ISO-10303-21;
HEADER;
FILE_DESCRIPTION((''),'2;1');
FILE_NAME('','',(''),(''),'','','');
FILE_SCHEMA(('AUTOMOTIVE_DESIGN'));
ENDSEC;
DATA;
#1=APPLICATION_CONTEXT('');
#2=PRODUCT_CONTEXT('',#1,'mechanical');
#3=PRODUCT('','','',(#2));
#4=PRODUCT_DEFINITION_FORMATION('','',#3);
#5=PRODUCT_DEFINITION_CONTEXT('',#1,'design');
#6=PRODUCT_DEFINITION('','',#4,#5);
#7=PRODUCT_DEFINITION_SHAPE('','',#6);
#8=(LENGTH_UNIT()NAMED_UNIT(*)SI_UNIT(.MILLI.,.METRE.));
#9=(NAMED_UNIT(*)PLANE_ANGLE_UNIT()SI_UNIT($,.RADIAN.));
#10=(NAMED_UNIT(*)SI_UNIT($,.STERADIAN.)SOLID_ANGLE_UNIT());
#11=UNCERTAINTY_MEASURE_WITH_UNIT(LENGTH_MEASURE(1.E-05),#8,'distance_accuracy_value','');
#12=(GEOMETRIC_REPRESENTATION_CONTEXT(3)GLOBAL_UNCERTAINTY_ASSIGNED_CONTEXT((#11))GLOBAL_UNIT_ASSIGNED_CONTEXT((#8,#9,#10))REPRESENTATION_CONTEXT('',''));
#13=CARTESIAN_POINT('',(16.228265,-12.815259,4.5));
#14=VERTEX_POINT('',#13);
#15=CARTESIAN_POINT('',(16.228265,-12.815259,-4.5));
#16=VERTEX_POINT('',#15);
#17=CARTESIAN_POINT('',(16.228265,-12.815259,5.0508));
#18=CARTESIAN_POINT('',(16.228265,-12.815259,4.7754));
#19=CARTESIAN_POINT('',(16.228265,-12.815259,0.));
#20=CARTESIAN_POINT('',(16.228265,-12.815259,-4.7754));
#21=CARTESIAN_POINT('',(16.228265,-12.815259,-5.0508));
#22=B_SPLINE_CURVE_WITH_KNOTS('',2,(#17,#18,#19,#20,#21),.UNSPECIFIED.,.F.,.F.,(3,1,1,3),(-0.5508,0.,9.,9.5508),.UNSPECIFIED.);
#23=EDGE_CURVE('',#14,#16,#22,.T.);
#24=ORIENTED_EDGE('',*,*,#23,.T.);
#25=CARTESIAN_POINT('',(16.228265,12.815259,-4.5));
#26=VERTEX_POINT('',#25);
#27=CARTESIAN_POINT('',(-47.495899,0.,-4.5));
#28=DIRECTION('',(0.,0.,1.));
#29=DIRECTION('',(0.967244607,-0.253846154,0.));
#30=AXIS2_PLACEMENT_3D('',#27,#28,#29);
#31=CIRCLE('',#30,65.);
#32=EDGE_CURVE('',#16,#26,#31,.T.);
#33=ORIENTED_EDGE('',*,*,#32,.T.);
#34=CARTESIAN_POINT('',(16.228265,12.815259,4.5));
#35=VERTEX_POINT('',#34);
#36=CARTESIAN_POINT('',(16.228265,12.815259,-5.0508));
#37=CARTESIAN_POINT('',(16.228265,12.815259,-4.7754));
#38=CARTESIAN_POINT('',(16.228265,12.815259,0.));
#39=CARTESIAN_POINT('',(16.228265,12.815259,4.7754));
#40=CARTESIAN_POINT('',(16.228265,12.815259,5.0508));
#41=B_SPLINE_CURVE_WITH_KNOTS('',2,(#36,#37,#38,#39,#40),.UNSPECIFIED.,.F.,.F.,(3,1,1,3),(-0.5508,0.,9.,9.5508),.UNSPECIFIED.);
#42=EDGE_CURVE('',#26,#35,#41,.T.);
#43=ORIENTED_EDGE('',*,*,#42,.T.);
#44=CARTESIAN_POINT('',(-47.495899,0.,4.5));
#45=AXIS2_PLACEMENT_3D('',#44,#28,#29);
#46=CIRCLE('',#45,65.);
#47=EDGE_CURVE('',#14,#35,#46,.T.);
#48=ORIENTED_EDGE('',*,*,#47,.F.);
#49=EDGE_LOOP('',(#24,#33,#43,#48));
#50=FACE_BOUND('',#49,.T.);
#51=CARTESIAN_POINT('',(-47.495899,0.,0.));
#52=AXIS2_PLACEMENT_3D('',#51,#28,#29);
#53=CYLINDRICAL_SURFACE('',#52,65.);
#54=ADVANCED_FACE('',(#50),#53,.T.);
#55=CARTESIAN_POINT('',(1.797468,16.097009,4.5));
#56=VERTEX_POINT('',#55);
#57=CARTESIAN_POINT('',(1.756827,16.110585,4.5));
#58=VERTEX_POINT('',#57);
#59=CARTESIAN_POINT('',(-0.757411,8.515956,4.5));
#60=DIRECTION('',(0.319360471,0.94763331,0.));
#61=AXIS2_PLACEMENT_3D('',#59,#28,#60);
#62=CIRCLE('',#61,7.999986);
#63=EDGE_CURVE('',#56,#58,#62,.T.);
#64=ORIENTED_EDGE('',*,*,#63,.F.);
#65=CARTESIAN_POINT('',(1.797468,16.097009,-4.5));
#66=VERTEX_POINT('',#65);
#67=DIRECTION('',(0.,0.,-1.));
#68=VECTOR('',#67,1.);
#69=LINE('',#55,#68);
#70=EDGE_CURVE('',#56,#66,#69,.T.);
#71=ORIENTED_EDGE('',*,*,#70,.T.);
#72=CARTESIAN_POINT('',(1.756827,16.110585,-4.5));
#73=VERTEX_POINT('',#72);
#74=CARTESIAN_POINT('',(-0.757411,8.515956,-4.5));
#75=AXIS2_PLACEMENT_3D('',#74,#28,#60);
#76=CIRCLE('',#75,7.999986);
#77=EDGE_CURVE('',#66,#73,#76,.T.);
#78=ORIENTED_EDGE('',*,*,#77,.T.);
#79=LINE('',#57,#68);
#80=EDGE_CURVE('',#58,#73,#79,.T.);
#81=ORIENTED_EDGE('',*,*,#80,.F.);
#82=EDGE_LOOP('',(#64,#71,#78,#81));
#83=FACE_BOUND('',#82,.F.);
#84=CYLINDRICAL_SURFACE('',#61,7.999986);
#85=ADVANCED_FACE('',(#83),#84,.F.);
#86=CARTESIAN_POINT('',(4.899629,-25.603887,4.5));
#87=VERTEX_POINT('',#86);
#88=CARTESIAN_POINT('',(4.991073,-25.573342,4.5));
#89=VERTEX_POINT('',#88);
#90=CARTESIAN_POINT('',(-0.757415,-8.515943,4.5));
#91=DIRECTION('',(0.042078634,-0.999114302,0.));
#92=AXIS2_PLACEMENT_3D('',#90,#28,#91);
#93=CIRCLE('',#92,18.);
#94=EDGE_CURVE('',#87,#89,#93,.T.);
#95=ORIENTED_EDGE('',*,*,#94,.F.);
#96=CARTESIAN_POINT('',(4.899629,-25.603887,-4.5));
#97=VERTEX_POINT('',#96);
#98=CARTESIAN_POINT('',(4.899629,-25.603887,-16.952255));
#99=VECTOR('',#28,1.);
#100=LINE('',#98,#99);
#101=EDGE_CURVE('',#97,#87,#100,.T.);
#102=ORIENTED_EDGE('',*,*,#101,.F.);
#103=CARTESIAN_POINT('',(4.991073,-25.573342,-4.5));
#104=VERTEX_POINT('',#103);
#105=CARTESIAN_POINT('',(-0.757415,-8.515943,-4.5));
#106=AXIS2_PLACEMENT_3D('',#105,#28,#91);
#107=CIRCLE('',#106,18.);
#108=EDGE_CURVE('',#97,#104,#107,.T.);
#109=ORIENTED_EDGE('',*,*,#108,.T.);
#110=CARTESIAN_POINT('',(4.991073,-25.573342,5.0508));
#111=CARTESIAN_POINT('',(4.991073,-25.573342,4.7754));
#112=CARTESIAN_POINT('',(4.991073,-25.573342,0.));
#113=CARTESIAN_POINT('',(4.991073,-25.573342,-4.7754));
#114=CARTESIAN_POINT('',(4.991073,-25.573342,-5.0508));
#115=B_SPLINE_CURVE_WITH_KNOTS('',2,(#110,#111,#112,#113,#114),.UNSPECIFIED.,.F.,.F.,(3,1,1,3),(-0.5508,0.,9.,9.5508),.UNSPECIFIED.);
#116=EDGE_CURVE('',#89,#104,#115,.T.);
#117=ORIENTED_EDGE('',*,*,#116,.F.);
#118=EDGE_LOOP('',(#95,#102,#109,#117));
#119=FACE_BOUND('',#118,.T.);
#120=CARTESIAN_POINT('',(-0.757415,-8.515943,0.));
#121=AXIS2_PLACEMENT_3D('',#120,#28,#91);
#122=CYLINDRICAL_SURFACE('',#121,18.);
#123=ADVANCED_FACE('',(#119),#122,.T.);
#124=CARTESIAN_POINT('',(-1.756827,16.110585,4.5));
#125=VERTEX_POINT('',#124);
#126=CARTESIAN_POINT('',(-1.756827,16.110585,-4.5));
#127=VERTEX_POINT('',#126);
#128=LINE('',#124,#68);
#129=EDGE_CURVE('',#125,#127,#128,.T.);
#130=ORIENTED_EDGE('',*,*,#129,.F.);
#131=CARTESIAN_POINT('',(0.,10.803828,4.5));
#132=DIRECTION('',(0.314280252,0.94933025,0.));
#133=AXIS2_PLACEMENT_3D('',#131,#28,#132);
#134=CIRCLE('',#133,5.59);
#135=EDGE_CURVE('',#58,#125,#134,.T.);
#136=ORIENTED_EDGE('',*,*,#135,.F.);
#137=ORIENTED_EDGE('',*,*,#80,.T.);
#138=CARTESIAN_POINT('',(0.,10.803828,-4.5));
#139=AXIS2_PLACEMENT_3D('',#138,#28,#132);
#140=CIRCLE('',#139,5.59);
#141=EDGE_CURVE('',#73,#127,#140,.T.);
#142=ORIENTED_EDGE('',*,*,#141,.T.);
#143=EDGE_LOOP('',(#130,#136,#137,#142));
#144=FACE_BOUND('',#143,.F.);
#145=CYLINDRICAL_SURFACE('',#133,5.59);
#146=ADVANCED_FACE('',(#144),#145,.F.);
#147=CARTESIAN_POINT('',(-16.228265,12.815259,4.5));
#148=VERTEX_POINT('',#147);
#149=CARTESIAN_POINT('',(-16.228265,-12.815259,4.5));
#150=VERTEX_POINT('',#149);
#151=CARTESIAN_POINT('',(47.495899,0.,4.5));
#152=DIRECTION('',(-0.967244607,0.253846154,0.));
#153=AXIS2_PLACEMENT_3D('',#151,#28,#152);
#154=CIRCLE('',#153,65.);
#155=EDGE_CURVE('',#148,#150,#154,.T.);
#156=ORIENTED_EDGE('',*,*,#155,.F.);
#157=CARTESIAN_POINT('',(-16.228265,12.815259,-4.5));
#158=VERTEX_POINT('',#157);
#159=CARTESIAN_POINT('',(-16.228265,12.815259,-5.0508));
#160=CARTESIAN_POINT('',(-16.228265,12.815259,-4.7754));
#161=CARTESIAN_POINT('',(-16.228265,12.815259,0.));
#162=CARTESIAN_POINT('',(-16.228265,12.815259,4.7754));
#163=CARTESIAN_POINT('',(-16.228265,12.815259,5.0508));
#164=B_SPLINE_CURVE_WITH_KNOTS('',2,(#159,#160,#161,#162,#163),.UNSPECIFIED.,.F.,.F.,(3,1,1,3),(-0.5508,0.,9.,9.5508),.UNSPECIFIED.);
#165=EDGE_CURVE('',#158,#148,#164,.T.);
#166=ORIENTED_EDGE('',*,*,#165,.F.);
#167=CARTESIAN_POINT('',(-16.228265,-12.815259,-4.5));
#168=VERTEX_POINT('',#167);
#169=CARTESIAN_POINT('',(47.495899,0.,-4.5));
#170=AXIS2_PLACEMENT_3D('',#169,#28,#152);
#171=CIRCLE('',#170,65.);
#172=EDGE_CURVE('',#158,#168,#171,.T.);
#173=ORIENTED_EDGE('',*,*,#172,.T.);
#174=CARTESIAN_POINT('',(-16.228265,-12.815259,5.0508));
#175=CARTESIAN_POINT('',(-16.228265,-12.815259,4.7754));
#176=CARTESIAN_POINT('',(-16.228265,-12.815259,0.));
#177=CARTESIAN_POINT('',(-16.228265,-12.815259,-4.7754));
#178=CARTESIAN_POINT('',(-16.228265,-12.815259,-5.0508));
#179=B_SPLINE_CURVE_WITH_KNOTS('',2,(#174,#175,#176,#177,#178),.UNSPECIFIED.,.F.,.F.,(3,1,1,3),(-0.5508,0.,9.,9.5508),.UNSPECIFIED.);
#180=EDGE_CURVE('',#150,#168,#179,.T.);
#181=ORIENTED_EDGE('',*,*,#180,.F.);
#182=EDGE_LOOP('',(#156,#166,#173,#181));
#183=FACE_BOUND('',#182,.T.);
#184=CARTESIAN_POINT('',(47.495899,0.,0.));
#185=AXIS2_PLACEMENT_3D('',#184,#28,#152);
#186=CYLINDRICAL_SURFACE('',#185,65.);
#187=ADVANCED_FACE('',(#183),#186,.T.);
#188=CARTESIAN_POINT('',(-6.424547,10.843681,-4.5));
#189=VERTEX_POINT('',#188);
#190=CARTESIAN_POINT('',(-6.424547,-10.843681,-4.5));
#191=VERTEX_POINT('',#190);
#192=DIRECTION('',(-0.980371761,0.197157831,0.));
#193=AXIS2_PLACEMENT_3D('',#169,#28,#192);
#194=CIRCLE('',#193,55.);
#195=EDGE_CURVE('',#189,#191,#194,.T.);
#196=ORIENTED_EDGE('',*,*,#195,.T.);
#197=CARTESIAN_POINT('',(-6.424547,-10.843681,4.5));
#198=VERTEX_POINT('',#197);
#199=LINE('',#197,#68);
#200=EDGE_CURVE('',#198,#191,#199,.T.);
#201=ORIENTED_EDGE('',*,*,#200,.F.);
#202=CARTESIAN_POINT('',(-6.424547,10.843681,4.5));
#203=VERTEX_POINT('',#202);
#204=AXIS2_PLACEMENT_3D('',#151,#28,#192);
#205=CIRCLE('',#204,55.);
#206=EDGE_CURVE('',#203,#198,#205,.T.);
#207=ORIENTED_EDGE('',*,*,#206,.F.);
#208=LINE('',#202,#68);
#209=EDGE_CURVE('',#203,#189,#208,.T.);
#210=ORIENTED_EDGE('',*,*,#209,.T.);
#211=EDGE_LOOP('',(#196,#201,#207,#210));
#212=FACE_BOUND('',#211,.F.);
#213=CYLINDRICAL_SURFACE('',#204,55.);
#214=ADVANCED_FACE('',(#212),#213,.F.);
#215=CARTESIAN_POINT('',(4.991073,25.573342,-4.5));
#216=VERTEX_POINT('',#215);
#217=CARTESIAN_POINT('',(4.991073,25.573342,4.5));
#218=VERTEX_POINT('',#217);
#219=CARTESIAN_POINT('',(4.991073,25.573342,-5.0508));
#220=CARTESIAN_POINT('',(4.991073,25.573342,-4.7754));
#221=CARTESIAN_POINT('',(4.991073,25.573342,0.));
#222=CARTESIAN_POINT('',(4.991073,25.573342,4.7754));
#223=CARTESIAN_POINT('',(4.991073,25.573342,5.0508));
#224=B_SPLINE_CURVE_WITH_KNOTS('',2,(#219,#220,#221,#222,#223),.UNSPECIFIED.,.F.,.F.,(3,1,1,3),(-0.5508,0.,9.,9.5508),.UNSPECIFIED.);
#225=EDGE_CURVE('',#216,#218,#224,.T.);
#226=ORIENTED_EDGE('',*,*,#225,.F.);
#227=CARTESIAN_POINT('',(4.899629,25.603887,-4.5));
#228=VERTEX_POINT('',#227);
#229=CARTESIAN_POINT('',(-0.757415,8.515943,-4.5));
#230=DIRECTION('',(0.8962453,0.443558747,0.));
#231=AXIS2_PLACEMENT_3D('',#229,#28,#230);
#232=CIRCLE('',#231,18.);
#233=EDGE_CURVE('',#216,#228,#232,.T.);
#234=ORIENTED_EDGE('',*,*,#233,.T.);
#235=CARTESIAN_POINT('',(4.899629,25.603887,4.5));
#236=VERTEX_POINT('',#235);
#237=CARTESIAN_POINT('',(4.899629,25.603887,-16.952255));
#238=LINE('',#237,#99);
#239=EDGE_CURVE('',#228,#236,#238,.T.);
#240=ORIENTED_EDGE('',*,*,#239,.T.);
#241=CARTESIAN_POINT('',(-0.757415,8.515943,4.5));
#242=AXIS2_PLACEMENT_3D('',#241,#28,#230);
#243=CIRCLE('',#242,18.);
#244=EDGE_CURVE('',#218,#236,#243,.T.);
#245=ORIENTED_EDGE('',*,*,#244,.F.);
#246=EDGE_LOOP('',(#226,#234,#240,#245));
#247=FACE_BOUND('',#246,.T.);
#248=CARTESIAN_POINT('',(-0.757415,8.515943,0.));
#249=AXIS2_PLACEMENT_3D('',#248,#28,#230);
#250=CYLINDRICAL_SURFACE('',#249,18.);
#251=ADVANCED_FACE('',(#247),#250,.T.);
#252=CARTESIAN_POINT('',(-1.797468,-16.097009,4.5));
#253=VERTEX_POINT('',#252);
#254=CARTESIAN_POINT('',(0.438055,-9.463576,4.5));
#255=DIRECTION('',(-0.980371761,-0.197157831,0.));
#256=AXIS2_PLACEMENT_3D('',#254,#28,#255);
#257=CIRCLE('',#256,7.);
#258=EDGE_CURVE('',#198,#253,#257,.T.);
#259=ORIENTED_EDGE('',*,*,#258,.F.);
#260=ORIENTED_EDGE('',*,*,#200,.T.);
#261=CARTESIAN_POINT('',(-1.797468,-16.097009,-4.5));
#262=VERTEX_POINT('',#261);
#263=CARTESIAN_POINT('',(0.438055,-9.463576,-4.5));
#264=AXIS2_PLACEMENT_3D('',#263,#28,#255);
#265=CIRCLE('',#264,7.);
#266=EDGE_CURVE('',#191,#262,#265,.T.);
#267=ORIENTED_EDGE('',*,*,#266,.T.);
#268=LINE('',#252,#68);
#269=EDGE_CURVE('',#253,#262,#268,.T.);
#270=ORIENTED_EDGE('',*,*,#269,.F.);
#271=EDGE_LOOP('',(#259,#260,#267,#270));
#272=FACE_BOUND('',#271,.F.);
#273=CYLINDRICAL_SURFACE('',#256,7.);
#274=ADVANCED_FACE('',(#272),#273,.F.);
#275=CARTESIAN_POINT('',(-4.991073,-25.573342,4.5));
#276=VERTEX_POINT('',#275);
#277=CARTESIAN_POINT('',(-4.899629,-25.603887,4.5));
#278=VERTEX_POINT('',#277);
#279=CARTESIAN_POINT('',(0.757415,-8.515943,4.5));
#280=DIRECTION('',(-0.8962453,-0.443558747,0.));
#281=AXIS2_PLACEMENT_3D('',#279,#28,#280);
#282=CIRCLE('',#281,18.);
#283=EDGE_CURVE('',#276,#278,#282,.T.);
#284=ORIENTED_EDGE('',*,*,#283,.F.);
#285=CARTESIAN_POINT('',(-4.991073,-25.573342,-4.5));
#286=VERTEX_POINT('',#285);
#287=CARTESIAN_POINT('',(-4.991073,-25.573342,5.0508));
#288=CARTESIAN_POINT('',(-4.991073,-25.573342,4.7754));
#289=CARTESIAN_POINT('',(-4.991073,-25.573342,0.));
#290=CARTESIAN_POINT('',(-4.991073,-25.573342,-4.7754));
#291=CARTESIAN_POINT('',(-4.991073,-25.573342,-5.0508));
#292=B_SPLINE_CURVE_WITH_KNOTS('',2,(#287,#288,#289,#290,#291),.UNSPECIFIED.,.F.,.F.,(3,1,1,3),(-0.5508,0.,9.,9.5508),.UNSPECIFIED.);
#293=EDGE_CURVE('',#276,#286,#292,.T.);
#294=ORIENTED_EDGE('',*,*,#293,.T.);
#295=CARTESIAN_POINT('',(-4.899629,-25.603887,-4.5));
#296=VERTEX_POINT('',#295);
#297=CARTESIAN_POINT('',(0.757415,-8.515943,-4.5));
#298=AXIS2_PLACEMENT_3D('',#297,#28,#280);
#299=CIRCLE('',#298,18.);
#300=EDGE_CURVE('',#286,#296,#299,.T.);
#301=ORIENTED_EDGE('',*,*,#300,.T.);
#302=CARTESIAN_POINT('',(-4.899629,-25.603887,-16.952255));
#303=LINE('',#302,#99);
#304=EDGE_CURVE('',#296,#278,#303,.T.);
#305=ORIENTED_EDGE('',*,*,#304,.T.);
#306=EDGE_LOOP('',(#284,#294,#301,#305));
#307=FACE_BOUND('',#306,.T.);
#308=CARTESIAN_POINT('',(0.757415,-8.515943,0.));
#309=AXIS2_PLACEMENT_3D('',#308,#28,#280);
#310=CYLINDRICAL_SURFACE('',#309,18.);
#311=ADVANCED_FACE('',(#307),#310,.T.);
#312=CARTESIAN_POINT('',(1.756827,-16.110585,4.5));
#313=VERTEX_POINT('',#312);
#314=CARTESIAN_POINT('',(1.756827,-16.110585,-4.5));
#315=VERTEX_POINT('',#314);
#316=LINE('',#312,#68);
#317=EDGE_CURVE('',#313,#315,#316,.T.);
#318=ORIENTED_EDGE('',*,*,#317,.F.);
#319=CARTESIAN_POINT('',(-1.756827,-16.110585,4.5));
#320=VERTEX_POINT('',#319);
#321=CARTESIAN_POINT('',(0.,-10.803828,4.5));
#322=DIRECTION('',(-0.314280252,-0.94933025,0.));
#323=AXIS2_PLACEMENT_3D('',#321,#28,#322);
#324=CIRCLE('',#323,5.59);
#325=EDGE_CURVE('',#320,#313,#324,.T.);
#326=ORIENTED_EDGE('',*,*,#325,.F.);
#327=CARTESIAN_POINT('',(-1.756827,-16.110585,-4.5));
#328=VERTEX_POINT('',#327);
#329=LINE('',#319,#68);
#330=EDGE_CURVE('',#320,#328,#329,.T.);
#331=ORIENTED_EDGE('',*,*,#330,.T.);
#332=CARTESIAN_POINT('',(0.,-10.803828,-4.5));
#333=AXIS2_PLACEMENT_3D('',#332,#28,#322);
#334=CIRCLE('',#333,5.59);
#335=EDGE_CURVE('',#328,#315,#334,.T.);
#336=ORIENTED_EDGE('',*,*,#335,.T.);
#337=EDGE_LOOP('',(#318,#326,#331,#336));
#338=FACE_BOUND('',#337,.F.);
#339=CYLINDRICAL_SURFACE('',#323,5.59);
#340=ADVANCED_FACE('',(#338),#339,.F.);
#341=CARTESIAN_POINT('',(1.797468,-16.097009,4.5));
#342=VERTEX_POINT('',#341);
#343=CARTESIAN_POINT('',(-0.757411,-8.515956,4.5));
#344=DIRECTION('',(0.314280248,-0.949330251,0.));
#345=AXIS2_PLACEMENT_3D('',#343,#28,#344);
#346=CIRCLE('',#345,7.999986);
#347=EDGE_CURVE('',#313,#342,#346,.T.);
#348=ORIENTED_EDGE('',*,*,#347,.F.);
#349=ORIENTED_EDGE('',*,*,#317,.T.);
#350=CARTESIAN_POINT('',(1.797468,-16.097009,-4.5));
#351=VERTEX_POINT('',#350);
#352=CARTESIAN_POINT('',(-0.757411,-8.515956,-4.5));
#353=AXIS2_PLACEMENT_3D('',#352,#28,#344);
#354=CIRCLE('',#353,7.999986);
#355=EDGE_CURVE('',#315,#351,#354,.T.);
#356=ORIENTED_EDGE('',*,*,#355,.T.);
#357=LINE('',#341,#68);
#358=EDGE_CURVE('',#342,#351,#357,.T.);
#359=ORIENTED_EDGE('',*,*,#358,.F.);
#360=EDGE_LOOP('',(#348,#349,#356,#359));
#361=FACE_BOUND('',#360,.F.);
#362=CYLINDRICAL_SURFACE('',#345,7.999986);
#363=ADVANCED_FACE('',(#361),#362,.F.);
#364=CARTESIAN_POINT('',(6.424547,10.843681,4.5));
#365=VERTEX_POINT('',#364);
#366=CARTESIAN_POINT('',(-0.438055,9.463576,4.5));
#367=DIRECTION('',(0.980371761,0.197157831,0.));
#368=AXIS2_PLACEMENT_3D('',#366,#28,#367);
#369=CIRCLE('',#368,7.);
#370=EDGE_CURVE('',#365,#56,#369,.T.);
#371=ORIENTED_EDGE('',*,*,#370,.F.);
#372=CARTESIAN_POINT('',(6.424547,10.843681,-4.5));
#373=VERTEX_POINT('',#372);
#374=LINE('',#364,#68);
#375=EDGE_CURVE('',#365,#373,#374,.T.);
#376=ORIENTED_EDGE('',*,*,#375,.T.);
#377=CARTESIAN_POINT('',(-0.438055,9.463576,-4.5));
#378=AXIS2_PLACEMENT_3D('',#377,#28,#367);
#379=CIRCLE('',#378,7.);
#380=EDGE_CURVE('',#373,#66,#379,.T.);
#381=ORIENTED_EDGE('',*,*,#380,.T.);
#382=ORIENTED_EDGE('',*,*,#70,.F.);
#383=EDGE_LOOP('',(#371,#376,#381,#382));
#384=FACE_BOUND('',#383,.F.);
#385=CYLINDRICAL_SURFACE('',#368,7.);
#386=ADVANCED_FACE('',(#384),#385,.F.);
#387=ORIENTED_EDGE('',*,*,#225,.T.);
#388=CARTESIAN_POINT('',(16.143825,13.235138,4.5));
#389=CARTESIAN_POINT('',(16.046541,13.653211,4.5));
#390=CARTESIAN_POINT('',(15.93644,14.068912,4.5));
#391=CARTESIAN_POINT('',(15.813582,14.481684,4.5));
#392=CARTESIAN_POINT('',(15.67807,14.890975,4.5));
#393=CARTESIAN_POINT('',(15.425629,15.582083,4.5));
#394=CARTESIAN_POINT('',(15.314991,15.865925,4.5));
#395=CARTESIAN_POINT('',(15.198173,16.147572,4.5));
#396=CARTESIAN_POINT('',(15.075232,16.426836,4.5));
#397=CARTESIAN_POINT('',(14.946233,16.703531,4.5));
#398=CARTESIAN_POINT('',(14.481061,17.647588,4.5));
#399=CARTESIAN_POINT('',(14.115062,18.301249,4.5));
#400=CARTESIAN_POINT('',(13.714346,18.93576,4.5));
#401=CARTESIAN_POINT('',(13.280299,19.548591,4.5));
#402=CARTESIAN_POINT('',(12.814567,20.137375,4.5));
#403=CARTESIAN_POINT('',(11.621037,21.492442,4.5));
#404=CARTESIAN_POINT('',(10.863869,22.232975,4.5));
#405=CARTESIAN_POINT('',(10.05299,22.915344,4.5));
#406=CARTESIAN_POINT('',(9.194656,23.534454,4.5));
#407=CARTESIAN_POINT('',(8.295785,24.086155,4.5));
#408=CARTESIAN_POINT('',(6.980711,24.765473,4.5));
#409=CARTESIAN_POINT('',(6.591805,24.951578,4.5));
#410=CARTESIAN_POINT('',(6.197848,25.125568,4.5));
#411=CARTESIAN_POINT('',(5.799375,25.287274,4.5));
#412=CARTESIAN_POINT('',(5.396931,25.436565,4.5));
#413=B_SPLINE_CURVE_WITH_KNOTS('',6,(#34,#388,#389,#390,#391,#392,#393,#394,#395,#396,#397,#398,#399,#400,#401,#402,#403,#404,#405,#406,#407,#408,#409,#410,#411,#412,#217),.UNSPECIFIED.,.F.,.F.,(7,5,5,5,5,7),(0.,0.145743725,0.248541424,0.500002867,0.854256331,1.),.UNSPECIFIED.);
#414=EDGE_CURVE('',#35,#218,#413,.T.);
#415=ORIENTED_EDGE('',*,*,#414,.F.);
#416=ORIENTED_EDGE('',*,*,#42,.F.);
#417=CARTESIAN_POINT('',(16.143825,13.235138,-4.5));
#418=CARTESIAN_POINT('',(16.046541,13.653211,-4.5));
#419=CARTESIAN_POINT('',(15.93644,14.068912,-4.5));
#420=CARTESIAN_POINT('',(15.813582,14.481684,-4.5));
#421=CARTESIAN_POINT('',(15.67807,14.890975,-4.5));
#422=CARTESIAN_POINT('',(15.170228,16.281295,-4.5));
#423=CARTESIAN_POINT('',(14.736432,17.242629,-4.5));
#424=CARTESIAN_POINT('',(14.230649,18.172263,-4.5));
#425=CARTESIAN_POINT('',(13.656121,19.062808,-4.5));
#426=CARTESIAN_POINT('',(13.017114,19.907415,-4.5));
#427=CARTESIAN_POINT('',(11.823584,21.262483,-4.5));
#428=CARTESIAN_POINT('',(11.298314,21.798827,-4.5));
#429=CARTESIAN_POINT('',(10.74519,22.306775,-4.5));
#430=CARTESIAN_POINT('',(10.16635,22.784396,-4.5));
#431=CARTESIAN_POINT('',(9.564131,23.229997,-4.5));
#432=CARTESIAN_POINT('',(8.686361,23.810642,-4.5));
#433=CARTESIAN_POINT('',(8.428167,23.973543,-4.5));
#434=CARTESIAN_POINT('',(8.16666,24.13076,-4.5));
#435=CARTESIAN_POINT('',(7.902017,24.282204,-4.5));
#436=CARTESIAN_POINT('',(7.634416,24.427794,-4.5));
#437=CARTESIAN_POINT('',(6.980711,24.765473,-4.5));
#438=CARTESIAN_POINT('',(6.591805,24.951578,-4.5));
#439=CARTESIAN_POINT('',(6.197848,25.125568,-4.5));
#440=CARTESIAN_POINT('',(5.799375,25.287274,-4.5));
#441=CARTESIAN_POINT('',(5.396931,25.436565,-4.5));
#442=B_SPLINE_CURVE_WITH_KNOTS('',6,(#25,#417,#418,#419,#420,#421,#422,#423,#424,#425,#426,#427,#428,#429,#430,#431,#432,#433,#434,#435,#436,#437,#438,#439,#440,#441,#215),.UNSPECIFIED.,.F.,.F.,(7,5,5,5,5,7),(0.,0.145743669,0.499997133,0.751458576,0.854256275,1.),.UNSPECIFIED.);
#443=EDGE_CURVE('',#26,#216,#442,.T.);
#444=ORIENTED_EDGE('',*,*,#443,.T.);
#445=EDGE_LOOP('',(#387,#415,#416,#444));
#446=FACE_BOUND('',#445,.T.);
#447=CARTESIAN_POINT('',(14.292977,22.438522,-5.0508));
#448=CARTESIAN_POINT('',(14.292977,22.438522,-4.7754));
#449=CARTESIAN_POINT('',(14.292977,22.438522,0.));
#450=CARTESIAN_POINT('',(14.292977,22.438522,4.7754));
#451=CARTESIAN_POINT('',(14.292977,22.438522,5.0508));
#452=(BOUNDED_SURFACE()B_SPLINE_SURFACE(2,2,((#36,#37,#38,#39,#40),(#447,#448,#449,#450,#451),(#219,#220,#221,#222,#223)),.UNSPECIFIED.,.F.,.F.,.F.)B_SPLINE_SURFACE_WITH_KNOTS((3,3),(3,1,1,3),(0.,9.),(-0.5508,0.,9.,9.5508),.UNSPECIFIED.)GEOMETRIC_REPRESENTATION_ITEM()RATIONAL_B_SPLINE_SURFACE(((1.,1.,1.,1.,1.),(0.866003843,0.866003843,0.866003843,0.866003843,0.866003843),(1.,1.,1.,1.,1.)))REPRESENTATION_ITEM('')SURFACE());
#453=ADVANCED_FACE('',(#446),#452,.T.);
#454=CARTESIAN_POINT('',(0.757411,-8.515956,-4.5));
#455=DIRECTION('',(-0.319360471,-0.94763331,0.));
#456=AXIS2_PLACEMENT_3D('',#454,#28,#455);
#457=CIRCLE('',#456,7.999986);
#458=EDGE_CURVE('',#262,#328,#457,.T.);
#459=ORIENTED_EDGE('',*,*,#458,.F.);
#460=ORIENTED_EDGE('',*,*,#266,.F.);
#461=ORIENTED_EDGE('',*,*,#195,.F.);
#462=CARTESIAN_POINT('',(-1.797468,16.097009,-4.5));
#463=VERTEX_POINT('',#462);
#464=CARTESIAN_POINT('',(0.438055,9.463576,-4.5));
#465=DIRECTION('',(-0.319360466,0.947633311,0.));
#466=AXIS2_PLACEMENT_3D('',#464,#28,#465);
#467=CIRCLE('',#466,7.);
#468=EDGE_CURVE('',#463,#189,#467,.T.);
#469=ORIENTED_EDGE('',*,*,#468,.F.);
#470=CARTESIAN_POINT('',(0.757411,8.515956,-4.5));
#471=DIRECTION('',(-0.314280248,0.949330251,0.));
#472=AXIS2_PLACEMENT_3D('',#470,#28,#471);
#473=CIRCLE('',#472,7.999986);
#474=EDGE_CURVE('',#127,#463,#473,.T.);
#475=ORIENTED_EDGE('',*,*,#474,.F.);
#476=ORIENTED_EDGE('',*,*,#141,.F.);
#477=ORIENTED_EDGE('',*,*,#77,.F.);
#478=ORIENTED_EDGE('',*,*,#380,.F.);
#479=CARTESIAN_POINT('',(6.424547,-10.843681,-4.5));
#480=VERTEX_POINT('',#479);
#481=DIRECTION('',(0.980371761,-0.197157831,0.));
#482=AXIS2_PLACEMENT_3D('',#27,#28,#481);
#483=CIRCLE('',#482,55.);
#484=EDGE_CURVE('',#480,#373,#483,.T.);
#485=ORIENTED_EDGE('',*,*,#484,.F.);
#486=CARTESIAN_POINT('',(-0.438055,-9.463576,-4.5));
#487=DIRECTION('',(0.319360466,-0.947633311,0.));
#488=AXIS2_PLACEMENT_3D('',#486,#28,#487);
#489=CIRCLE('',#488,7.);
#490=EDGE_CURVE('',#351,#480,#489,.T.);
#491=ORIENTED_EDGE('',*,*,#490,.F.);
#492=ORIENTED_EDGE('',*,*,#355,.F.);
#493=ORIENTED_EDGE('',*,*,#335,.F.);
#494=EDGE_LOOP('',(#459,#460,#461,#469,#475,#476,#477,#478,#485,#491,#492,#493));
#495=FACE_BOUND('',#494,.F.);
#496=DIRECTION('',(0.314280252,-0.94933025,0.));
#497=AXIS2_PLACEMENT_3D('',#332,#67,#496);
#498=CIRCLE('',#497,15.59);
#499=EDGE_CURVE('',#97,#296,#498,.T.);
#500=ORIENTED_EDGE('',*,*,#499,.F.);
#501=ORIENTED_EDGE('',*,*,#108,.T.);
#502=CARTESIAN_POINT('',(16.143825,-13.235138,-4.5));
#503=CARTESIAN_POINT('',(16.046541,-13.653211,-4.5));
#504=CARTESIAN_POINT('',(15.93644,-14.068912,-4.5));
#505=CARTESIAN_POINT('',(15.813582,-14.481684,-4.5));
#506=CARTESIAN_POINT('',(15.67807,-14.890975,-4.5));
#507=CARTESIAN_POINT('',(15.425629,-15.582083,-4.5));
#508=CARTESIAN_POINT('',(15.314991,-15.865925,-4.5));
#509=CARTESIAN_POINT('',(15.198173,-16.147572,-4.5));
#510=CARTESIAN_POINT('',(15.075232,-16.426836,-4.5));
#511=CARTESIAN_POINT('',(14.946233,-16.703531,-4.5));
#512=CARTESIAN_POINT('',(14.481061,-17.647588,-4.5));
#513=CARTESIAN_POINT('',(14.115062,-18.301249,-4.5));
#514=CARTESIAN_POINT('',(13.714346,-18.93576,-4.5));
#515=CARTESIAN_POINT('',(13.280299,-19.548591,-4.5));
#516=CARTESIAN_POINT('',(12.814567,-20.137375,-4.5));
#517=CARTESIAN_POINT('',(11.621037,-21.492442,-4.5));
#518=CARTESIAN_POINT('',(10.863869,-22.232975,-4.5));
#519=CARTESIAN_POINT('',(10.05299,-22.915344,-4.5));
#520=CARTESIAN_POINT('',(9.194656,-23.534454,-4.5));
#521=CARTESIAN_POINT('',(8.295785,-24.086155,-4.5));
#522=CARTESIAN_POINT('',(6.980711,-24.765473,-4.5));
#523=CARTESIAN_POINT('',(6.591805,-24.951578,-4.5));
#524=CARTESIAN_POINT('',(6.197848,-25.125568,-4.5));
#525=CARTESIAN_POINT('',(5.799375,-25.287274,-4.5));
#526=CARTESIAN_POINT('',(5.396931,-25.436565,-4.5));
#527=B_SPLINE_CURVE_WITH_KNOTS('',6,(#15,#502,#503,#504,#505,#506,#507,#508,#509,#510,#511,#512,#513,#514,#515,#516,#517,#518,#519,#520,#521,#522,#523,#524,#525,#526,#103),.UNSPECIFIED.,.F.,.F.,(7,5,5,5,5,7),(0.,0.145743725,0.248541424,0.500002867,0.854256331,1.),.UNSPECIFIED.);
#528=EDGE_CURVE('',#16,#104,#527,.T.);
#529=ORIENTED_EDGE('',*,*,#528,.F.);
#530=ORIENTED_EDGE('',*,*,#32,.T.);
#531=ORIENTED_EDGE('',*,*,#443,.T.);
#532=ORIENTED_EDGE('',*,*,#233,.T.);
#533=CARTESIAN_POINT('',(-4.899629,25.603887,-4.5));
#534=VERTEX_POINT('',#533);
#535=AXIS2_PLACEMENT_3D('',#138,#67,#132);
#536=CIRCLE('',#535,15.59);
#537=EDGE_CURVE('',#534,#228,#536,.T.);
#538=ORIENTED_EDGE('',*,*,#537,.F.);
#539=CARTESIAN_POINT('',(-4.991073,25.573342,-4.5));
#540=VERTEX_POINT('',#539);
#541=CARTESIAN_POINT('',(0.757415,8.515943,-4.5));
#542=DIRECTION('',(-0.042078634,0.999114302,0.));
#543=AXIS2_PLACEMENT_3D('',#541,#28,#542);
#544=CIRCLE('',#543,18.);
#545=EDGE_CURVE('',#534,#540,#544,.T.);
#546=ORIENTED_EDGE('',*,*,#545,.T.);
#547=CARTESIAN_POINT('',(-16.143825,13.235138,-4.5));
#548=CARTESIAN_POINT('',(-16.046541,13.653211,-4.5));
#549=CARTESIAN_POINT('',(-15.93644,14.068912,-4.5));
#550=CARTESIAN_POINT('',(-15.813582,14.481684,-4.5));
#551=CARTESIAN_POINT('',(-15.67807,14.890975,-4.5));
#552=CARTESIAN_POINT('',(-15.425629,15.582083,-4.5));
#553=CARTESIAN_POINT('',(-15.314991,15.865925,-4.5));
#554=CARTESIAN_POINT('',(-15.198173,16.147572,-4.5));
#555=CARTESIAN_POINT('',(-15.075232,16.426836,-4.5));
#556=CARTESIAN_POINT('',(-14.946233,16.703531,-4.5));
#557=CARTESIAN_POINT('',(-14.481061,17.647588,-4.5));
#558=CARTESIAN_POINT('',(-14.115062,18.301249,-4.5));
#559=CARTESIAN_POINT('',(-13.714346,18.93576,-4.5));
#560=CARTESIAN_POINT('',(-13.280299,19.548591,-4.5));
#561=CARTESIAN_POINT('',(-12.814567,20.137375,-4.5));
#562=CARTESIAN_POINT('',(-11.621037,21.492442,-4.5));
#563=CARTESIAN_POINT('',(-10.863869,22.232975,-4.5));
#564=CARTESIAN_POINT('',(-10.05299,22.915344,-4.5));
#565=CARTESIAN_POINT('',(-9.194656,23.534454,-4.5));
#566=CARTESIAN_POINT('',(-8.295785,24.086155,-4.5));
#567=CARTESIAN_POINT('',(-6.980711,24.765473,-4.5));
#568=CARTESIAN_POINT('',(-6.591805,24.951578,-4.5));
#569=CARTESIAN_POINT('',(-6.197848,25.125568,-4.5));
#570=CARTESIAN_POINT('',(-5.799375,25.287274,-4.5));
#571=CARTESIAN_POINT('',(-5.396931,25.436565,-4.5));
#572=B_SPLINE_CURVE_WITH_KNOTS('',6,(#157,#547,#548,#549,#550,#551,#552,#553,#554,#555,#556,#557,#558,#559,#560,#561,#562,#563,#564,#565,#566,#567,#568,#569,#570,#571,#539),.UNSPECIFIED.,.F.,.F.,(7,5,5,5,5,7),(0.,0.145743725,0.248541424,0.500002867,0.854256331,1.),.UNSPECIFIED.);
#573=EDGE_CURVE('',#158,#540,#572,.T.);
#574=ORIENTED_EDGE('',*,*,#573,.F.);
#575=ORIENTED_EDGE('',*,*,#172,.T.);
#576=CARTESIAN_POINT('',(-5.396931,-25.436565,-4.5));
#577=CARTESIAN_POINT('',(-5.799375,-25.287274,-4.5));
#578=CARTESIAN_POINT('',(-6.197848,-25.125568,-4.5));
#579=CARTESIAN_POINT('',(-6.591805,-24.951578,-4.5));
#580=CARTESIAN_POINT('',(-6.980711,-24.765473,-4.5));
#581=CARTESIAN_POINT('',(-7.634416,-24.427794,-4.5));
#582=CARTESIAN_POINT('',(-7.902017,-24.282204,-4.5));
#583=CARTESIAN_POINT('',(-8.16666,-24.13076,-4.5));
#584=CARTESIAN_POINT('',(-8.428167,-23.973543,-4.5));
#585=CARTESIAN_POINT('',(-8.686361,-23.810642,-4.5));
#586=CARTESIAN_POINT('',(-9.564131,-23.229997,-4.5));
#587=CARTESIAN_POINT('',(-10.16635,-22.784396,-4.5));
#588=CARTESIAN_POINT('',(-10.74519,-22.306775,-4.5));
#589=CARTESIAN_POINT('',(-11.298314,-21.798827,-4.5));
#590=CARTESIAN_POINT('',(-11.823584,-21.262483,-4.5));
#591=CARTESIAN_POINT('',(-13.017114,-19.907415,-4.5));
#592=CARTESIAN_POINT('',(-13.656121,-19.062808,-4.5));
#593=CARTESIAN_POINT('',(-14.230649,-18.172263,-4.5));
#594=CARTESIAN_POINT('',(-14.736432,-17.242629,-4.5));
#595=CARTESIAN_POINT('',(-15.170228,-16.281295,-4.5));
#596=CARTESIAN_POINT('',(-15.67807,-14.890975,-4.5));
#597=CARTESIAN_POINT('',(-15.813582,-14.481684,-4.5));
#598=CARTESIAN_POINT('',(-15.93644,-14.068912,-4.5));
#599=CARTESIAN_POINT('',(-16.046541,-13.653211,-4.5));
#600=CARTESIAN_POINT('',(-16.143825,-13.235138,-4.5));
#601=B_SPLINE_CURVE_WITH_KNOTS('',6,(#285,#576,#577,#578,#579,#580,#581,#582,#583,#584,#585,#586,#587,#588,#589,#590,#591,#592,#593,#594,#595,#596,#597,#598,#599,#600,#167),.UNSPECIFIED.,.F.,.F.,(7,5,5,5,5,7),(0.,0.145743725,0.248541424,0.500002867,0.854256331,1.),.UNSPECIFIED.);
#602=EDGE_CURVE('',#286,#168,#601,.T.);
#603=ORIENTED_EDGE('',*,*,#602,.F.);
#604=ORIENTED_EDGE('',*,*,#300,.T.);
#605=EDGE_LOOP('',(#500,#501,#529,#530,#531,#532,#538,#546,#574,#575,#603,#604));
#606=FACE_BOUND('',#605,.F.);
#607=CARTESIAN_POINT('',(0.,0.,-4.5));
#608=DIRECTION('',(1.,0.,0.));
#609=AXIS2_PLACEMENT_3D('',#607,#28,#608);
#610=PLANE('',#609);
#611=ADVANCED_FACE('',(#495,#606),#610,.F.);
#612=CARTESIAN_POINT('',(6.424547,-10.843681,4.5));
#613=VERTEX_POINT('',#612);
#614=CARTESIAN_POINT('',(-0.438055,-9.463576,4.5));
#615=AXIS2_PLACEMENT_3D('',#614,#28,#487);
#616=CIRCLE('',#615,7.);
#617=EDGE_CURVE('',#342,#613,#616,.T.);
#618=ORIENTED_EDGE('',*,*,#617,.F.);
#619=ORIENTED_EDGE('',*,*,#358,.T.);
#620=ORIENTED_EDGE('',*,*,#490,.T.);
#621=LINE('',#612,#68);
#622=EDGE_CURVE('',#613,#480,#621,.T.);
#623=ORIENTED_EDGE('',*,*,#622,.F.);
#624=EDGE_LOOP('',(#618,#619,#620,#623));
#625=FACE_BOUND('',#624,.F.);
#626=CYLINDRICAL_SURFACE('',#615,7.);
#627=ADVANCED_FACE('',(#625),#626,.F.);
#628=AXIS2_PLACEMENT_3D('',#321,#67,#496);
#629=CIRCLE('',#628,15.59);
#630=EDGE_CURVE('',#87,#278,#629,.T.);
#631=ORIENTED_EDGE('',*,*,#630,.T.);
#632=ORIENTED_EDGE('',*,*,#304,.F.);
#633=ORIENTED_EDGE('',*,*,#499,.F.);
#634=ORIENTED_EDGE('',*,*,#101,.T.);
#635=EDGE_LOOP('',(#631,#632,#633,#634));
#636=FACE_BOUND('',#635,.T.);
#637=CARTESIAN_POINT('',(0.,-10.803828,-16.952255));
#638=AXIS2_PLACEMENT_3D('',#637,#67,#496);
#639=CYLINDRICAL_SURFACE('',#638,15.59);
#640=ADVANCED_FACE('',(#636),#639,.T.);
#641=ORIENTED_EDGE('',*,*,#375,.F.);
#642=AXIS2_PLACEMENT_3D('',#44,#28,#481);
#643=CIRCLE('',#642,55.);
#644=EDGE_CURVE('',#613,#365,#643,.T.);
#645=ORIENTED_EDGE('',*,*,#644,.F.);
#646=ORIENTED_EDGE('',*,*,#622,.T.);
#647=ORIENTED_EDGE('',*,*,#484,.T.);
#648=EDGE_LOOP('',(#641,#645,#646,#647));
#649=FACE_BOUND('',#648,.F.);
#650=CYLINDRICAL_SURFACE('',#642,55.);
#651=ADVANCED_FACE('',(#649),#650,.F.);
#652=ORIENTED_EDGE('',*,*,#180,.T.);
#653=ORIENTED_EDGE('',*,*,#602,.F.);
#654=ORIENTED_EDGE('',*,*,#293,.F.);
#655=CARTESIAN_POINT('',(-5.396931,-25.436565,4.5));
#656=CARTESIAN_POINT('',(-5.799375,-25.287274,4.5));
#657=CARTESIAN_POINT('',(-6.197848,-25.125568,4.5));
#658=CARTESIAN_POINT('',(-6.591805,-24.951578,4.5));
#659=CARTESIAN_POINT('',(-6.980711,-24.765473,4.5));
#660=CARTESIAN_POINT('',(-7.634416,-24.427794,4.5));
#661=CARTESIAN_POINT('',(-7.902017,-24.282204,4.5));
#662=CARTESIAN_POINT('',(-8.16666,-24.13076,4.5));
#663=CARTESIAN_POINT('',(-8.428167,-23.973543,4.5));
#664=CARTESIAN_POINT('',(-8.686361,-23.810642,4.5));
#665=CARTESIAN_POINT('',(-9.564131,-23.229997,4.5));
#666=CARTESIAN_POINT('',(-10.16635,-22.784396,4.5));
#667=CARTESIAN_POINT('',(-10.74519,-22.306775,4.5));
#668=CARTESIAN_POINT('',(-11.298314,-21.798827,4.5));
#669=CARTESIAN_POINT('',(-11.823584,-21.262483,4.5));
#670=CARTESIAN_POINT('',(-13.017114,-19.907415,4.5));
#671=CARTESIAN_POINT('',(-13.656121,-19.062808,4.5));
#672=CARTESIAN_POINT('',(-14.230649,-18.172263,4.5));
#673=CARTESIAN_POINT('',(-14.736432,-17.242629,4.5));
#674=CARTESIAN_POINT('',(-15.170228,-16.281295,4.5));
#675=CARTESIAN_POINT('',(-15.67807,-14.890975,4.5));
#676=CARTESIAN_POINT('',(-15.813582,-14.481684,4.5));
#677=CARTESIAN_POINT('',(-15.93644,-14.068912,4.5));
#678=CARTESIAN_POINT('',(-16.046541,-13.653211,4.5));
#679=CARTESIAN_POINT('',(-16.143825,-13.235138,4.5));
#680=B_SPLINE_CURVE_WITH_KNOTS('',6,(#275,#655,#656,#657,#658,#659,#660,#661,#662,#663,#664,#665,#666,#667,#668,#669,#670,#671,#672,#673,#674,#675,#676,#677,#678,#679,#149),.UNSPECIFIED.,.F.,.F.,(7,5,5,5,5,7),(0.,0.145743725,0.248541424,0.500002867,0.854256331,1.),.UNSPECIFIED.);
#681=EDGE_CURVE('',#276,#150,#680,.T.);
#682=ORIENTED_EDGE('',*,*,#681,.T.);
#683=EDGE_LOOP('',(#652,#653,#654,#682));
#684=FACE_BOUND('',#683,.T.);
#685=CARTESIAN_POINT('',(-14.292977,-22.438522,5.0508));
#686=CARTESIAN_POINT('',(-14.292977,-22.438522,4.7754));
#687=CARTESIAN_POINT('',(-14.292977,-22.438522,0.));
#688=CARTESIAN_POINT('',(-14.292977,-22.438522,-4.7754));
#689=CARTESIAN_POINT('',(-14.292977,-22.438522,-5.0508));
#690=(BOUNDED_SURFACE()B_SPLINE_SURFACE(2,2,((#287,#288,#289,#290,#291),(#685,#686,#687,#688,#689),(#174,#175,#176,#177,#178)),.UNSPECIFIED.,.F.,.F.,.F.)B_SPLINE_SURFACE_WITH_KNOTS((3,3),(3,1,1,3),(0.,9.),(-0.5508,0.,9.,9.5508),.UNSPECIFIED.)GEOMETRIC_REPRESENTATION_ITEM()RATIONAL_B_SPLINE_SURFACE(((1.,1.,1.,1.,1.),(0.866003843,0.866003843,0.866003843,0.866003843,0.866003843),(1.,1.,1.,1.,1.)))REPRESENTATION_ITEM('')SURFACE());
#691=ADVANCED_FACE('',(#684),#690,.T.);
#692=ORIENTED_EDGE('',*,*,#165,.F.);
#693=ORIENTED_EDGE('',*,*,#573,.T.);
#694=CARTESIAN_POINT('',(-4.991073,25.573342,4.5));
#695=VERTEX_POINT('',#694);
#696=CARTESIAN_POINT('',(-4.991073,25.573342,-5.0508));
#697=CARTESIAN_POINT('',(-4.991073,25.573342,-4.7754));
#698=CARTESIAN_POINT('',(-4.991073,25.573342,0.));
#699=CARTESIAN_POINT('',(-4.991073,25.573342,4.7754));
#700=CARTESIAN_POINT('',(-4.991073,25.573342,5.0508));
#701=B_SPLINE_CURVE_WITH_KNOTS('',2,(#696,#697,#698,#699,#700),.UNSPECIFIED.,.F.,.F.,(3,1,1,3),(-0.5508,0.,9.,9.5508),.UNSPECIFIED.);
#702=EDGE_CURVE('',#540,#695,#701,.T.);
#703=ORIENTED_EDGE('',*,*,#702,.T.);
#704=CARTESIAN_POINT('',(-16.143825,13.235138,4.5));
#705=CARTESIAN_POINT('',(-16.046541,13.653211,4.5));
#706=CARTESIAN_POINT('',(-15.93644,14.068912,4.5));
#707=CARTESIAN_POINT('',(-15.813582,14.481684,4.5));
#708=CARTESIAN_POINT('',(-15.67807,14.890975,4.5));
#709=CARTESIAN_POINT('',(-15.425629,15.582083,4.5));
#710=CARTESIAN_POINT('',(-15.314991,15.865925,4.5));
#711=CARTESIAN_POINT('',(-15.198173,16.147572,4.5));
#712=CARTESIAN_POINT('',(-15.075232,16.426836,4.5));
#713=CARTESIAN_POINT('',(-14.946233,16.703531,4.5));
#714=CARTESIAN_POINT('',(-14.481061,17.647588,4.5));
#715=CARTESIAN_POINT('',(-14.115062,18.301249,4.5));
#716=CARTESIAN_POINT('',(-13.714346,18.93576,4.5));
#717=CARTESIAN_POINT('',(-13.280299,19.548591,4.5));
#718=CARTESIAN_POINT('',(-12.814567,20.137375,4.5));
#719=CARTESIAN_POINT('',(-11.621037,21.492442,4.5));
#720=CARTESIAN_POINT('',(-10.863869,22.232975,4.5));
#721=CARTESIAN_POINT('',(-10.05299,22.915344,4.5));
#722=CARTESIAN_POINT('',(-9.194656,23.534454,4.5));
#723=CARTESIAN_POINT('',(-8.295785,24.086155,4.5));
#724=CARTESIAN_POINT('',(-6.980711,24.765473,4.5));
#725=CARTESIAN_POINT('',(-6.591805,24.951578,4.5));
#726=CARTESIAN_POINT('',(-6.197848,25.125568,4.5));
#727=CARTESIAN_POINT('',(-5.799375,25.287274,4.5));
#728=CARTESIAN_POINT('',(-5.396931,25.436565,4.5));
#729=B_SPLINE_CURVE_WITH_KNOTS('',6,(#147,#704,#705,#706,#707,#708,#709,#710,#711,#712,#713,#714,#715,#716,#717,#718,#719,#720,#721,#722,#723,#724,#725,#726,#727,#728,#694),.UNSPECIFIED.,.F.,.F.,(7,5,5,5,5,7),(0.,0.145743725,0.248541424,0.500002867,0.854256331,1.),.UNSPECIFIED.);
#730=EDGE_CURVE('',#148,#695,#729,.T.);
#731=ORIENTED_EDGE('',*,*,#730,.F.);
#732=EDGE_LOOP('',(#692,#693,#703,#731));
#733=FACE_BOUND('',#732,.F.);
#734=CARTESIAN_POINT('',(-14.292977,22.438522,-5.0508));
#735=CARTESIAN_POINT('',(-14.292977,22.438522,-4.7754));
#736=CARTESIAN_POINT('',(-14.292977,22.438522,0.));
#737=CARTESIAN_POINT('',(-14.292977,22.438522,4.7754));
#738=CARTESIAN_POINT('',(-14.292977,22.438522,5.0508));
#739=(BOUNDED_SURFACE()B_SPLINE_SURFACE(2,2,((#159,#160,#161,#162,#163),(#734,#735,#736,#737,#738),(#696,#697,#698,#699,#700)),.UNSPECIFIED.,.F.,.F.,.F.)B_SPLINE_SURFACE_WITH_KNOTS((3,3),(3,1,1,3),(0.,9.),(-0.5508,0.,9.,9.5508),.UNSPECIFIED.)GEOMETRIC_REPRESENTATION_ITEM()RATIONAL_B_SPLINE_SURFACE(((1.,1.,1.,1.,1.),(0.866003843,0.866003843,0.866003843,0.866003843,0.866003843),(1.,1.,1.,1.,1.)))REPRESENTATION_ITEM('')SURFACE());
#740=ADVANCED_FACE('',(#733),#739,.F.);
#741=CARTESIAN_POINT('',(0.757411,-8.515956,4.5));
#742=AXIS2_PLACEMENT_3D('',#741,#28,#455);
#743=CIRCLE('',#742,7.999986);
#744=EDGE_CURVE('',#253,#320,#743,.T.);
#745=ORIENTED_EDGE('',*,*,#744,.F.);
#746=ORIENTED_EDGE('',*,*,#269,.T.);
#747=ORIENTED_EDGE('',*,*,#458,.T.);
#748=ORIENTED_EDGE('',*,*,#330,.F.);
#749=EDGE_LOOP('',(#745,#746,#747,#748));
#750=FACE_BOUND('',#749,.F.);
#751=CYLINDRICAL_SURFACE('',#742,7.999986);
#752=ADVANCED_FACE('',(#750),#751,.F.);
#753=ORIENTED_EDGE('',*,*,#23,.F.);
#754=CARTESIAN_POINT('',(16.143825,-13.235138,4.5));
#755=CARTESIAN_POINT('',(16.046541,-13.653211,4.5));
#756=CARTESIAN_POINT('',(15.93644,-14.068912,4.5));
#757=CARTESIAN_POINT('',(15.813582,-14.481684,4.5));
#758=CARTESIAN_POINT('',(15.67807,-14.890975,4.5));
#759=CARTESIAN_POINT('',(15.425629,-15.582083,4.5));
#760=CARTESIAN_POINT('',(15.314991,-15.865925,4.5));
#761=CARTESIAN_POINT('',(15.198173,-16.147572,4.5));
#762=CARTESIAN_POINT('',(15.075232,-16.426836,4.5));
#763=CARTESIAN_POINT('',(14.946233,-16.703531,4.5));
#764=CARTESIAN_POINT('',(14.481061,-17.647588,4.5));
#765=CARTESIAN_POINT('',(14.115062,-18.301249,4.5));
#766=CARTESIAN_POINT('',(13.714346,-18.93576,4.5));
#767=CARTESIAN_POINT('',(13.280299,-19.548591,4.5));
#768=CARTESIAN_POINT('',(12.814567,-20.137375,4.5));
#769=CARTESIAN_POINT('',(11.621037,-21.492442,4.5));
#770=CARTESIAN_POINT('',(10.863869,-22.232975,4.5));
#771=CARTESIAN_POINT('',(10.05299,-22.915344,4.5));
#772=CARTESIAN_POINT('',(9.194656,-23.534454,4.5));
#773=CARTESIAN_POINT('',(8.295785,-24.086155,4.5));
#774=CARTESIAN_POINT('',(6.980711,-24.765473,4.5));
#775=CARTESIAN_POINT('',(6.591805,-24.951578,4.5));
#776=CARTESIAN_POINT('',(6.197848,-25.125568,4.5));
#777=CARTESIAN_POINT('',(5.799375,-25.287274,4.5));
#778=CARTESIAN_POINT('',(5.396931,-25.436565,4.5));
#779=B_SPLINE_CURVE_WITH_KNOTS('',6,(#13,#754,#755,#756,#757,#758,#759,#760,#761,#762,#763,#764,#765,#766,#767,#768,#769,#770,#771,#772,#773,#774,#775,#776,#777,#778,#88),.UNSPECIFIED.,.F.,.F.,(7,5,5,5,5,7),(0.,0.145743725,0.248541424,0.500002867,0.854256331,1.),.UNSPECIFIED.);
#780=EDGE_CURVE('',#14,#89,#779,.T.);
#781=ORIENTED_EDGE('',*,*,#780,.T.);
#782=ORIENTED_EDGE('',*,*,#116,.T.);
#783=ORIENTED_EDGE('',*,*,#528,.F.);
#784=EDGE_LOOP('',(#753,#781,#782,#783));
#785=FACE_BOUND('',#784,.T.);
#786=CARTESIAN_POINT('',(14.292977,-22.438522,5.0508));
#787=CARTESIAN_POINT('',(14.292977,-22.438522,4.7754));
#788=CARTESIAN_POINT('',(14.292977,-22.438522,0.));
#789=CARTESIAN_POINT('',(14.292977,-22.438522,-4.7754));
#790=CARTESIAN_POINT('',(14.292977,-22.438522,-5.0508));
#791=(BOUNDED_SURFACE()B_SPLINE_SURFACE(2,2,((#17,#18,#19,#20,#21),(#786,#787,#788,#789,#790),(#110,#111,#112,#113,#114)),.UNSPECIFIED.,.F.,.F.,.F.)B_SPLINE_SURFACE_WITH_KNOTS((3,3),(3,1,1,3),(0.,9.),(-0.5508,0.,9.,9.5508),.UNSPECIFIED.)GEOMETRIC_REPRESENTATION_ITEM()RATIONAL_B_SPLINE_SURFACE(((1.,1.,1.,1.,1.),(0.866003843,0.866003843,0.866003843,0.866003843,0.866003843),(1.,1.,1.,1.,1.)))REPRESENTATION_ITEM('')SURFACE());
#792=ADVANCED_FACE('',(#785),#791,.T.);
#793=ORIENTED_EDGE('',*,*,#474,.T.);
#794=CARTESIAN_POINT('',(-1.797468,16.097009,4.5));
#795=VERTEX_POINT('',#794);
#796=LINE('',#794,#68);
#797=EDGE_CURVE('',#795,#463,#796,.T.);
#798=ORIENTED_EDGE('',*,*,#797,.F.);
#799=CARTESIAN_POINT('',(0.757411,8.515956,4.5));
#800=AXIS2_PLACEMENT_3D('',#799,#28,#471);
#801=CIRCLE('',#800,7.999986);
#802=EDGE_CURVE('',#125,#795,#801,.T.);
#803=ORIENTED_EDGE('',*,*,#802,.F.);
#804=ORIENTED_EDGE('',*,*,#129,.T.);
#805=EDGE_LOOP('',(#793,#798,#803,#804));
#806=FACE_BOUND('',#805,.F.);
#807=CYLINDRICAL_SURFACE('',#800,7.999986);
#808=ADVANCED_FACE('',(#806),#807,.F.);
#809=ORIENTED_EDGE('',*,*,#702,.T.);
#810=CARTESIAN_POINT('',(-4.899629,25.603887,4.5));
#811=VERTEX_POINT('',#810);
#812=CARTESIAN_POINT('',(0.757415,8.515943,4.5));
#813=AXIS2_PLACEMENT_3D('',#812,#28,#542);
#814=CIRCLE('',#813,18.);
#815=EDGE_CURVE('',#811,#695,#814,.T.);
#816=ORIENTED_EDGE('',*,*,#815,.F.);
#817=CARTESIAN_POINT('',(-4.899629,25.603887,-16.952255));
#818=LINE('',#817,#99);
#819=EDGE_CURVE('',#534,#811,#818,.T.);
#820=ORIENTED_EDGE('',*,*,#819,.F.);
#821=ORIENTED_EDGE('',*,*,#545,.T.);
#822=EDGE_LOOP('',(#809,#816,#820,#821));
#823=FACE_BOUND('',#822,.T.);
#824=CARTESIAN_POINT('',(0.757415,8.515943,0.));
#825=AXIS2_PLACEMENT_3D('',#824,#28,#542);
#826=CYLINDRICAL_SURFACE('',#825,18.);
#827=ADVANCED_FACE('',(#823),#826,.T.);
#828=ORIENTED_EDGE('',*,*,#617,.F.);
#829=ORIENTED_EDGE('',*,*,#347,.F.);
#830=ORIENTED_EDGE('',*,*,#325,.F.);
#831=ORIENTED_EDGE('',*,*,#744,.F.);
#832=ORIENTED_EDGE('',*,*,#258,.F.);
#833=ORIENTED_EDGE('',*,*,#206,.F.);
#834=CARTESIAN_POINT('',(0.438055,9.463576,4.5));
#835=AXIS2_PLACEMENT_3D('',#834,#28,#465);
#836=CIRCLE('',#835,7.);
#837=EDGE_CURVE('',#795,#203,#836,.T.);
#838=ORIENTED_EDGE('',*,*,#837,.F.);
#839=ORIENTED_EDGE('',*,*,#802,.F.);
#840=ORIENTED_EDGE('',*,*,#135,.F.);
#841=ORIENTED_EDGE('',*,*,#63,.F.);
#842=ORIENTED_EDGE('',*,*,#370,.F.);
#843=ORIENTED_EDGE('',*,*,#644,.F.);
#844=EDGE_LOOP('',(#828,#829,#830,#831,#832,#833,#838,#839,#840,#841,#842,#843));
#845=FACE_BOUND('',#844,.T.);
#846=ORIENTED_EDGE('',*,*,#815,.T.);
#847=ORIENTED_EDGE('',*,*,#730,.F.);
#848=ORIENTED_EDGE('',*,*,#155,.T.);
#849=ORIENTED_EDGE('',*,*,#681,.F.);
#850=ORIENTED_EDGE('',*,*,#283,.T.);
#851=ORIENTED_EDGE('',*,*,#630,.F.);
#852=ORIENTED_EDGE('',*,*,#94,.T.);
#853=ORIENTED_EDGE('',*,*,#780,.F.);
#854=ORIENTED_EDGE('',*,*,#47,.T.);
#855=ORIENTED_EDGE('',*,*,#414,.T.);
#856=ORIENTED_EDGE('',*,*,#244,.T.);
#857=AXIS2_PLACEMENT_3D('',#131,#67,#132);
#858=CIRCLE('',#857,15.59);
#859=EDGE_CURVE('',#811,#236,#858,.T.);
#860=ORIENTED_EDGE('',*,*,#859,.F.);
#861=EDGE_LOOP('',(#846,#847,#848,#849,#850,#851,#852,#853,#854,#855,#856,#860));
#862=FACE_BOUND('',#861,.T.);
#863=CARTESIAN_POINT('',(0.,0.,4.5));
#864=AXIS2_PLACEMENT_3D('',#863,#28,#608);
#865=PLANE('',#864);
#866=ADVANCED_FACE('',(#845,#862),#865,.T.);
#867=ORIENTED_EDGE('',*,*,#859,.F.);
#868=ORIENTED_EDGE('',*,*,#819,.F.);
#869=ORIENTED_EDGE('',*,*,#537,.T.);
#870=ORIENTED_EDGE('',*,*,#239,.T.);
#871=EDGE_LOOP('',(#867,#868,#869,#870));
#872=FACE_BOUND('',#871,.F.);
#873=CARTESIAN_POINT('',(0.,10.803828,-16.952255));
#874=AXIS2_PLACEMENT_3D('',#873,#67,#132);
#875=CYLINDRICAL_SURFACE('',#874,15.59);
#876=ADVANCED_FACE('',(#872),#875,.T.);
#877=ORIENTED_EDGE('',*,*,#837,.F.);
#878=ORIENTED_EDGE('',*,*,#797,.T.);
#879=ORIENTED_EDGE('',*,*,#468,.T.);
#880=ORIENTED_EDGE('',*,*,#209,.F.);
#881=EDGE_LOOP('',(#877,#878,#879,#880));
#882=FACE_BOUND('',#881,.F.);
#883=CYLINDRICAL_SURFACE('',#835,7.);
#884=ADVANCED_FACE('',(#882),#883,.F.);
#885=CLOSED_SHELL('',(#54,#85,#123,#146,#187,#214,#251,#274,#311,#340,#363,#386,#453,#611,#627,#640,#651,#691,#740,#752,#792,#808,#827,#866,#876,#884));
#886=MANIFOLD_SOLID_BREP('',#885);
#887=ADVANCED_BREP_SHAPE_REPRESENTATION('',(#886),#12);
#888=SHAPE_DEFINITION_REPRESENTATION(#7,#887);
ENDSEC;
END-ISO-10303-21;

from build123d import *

# Parameters (mm, degrees)
F1_DEPTH    = 4.5
F2_R        = 17
F3_T1_DEPTH = 33.9045095963
F5_DEPTH    = 9


# Not quite as in the source:
# - a fillet or chamfer that OpenCascade refuses, or shapes differently, is made with other operations: its cross-section is extruded or revolved along the edge and cut away or added


with BuildPart() as f1:
    # F0 (on Top) → F1 (new body, symmetric)
    with BuildSketch(Plane.XY):
        with BuildLine():
            ThreePointArc((15.375, -16.5), (17.5041005313, 0), (15.375, 16.5))
            ThreePointArc((15.375, 16.5), (9.0566864996, 23.6051242432), (0, 26.5))
            ThreePointArc((0, 26.5), (-9.0566864996, 23.6051242432), (-15.375, 16.5))
            ThreePointArc((-15.375, 16.5), (-17.5041005313, 0), (-15.375, -16.5))
            ThreePointArc((-15.375, -16.5), (-9.0566864996, -23.6051242432), (0, -26.5))
            ThreePointArc((0, -26.5), (9.0566864996, -23.6051242432), (15.375, -16.5))
        make_face()
    extrude(amount=F1_DEPTH, both=True)

    # F2
    f2_edges = [f1.edges().sort_by_distance(p)[0] for p in [
        (-15.375, 16.5, 0),
        (-15.375, -16.5, 0),
        (15.375, -16.5, 0),
        (15.375, 16.5, 0),
    ]]
    fillet(f2_edges, radius=F2_R)

    # F3: fillet of radius 15.59 on 2 edges, made by hand

    # F3_s2 → F3_t1 (cut)
    with BuildSketch(Plane.XY.offset(-16.9522547982)):
        with BuildLine():
            ThreePointArc((4.8996291219, 25.603887062), (0, 26.3938284652), (-4.8996291219, 25.603887062))
            ThreePointArc((-4.8996291219, 25.603887062), (-2.4809605234, 26.222238656), (0, 26.5))
            ThreePointArc((0, 26.5), (2.4809605234, 26.222238656), (4.8996291219, 25.603887062))
        make_face()
        with BuildLine():
            ThreePointArc((4.8996291219, -25.603887062), (0, -26.3938284652), (-4.8996291219, -25.603887062))
            ThreePointArc((-4.8996291219, -25.603887062), (-2.4809605234, -26.222238656), (0, -26.5))
            ThreePointArc((0, -26.5), (2.4809605234, -26.222238656), (4.8996291219, -25.603887062))
        make_face()
    extrude(amount=F3_T1_DEPTH, mode=Mode.SUBTRACT)

    # F4 (on face) → F5 (cut, through all)
    with BuildSketch(Plane.XY.offset(4.5)):
        with BuildLine():
            ThreePointArc((-6.424547387, 10.8436806891), (-7.5041005313, 0), (-6.424547387, -10.8436806891))
            ThreePointArc((-6.424547387, -10.8436806891), (-4.8148810997, -14.0903093829), (-1.797468323, -16.0970090531))
            ThreePointArc((-1.797468323, -16.0970090531), (-1.7771565537, -16.1038240182), (-1.7568266062, -16.1105845625))
            ThreePointArc((-1.7568266062, -16.1105845625), (0, -16.3938284652), (1.7568266062, -16.1105845625))
            ThreePointArc((1.7568266062, -16.1105845625), (1.7771565537, -16.1038240182), (1.797468323, -16.0970090531))
            ThreePointArc((1.797468323, -16.0970090531), (4.8148810997, -14.0903093829), (6.424547387, -10.8436806891))
            ThreePointArc((6.424547387, -10.8436806891), (7.5041005313, 0), (6.424547387, 10.8436806891))
            ThreePointArc((6.424547387, 10.8436806891), (4.8148810997, 14.0903093829), (1.797468323, 16.0970090531))
            ThreePointArc((1.797468323, 16.0970090531), (1.7771565537, 16.1038240182), (1.7568266062, 16.1105845625))
            ThreePointArc((1.7568266062, 16.1105845625), (0, 16.3938284652), (-1.7568266062, 16.1105845625))
            ThreePointArc((-1.7568266062, 16.1105845625), (-1.7771565537, 16.1038240182), (-1.797468323, 16.0970090531))
            ThreePointArc((-1.797468323, 16.0970090531), (-4.8148810997, 14.0903093829), (-6.424547387, 10.8436806891))
        make_face()
    extrude(amount=-F5_DEPTH, mode=Mode.SUBTRACT)


solid = f1.part
